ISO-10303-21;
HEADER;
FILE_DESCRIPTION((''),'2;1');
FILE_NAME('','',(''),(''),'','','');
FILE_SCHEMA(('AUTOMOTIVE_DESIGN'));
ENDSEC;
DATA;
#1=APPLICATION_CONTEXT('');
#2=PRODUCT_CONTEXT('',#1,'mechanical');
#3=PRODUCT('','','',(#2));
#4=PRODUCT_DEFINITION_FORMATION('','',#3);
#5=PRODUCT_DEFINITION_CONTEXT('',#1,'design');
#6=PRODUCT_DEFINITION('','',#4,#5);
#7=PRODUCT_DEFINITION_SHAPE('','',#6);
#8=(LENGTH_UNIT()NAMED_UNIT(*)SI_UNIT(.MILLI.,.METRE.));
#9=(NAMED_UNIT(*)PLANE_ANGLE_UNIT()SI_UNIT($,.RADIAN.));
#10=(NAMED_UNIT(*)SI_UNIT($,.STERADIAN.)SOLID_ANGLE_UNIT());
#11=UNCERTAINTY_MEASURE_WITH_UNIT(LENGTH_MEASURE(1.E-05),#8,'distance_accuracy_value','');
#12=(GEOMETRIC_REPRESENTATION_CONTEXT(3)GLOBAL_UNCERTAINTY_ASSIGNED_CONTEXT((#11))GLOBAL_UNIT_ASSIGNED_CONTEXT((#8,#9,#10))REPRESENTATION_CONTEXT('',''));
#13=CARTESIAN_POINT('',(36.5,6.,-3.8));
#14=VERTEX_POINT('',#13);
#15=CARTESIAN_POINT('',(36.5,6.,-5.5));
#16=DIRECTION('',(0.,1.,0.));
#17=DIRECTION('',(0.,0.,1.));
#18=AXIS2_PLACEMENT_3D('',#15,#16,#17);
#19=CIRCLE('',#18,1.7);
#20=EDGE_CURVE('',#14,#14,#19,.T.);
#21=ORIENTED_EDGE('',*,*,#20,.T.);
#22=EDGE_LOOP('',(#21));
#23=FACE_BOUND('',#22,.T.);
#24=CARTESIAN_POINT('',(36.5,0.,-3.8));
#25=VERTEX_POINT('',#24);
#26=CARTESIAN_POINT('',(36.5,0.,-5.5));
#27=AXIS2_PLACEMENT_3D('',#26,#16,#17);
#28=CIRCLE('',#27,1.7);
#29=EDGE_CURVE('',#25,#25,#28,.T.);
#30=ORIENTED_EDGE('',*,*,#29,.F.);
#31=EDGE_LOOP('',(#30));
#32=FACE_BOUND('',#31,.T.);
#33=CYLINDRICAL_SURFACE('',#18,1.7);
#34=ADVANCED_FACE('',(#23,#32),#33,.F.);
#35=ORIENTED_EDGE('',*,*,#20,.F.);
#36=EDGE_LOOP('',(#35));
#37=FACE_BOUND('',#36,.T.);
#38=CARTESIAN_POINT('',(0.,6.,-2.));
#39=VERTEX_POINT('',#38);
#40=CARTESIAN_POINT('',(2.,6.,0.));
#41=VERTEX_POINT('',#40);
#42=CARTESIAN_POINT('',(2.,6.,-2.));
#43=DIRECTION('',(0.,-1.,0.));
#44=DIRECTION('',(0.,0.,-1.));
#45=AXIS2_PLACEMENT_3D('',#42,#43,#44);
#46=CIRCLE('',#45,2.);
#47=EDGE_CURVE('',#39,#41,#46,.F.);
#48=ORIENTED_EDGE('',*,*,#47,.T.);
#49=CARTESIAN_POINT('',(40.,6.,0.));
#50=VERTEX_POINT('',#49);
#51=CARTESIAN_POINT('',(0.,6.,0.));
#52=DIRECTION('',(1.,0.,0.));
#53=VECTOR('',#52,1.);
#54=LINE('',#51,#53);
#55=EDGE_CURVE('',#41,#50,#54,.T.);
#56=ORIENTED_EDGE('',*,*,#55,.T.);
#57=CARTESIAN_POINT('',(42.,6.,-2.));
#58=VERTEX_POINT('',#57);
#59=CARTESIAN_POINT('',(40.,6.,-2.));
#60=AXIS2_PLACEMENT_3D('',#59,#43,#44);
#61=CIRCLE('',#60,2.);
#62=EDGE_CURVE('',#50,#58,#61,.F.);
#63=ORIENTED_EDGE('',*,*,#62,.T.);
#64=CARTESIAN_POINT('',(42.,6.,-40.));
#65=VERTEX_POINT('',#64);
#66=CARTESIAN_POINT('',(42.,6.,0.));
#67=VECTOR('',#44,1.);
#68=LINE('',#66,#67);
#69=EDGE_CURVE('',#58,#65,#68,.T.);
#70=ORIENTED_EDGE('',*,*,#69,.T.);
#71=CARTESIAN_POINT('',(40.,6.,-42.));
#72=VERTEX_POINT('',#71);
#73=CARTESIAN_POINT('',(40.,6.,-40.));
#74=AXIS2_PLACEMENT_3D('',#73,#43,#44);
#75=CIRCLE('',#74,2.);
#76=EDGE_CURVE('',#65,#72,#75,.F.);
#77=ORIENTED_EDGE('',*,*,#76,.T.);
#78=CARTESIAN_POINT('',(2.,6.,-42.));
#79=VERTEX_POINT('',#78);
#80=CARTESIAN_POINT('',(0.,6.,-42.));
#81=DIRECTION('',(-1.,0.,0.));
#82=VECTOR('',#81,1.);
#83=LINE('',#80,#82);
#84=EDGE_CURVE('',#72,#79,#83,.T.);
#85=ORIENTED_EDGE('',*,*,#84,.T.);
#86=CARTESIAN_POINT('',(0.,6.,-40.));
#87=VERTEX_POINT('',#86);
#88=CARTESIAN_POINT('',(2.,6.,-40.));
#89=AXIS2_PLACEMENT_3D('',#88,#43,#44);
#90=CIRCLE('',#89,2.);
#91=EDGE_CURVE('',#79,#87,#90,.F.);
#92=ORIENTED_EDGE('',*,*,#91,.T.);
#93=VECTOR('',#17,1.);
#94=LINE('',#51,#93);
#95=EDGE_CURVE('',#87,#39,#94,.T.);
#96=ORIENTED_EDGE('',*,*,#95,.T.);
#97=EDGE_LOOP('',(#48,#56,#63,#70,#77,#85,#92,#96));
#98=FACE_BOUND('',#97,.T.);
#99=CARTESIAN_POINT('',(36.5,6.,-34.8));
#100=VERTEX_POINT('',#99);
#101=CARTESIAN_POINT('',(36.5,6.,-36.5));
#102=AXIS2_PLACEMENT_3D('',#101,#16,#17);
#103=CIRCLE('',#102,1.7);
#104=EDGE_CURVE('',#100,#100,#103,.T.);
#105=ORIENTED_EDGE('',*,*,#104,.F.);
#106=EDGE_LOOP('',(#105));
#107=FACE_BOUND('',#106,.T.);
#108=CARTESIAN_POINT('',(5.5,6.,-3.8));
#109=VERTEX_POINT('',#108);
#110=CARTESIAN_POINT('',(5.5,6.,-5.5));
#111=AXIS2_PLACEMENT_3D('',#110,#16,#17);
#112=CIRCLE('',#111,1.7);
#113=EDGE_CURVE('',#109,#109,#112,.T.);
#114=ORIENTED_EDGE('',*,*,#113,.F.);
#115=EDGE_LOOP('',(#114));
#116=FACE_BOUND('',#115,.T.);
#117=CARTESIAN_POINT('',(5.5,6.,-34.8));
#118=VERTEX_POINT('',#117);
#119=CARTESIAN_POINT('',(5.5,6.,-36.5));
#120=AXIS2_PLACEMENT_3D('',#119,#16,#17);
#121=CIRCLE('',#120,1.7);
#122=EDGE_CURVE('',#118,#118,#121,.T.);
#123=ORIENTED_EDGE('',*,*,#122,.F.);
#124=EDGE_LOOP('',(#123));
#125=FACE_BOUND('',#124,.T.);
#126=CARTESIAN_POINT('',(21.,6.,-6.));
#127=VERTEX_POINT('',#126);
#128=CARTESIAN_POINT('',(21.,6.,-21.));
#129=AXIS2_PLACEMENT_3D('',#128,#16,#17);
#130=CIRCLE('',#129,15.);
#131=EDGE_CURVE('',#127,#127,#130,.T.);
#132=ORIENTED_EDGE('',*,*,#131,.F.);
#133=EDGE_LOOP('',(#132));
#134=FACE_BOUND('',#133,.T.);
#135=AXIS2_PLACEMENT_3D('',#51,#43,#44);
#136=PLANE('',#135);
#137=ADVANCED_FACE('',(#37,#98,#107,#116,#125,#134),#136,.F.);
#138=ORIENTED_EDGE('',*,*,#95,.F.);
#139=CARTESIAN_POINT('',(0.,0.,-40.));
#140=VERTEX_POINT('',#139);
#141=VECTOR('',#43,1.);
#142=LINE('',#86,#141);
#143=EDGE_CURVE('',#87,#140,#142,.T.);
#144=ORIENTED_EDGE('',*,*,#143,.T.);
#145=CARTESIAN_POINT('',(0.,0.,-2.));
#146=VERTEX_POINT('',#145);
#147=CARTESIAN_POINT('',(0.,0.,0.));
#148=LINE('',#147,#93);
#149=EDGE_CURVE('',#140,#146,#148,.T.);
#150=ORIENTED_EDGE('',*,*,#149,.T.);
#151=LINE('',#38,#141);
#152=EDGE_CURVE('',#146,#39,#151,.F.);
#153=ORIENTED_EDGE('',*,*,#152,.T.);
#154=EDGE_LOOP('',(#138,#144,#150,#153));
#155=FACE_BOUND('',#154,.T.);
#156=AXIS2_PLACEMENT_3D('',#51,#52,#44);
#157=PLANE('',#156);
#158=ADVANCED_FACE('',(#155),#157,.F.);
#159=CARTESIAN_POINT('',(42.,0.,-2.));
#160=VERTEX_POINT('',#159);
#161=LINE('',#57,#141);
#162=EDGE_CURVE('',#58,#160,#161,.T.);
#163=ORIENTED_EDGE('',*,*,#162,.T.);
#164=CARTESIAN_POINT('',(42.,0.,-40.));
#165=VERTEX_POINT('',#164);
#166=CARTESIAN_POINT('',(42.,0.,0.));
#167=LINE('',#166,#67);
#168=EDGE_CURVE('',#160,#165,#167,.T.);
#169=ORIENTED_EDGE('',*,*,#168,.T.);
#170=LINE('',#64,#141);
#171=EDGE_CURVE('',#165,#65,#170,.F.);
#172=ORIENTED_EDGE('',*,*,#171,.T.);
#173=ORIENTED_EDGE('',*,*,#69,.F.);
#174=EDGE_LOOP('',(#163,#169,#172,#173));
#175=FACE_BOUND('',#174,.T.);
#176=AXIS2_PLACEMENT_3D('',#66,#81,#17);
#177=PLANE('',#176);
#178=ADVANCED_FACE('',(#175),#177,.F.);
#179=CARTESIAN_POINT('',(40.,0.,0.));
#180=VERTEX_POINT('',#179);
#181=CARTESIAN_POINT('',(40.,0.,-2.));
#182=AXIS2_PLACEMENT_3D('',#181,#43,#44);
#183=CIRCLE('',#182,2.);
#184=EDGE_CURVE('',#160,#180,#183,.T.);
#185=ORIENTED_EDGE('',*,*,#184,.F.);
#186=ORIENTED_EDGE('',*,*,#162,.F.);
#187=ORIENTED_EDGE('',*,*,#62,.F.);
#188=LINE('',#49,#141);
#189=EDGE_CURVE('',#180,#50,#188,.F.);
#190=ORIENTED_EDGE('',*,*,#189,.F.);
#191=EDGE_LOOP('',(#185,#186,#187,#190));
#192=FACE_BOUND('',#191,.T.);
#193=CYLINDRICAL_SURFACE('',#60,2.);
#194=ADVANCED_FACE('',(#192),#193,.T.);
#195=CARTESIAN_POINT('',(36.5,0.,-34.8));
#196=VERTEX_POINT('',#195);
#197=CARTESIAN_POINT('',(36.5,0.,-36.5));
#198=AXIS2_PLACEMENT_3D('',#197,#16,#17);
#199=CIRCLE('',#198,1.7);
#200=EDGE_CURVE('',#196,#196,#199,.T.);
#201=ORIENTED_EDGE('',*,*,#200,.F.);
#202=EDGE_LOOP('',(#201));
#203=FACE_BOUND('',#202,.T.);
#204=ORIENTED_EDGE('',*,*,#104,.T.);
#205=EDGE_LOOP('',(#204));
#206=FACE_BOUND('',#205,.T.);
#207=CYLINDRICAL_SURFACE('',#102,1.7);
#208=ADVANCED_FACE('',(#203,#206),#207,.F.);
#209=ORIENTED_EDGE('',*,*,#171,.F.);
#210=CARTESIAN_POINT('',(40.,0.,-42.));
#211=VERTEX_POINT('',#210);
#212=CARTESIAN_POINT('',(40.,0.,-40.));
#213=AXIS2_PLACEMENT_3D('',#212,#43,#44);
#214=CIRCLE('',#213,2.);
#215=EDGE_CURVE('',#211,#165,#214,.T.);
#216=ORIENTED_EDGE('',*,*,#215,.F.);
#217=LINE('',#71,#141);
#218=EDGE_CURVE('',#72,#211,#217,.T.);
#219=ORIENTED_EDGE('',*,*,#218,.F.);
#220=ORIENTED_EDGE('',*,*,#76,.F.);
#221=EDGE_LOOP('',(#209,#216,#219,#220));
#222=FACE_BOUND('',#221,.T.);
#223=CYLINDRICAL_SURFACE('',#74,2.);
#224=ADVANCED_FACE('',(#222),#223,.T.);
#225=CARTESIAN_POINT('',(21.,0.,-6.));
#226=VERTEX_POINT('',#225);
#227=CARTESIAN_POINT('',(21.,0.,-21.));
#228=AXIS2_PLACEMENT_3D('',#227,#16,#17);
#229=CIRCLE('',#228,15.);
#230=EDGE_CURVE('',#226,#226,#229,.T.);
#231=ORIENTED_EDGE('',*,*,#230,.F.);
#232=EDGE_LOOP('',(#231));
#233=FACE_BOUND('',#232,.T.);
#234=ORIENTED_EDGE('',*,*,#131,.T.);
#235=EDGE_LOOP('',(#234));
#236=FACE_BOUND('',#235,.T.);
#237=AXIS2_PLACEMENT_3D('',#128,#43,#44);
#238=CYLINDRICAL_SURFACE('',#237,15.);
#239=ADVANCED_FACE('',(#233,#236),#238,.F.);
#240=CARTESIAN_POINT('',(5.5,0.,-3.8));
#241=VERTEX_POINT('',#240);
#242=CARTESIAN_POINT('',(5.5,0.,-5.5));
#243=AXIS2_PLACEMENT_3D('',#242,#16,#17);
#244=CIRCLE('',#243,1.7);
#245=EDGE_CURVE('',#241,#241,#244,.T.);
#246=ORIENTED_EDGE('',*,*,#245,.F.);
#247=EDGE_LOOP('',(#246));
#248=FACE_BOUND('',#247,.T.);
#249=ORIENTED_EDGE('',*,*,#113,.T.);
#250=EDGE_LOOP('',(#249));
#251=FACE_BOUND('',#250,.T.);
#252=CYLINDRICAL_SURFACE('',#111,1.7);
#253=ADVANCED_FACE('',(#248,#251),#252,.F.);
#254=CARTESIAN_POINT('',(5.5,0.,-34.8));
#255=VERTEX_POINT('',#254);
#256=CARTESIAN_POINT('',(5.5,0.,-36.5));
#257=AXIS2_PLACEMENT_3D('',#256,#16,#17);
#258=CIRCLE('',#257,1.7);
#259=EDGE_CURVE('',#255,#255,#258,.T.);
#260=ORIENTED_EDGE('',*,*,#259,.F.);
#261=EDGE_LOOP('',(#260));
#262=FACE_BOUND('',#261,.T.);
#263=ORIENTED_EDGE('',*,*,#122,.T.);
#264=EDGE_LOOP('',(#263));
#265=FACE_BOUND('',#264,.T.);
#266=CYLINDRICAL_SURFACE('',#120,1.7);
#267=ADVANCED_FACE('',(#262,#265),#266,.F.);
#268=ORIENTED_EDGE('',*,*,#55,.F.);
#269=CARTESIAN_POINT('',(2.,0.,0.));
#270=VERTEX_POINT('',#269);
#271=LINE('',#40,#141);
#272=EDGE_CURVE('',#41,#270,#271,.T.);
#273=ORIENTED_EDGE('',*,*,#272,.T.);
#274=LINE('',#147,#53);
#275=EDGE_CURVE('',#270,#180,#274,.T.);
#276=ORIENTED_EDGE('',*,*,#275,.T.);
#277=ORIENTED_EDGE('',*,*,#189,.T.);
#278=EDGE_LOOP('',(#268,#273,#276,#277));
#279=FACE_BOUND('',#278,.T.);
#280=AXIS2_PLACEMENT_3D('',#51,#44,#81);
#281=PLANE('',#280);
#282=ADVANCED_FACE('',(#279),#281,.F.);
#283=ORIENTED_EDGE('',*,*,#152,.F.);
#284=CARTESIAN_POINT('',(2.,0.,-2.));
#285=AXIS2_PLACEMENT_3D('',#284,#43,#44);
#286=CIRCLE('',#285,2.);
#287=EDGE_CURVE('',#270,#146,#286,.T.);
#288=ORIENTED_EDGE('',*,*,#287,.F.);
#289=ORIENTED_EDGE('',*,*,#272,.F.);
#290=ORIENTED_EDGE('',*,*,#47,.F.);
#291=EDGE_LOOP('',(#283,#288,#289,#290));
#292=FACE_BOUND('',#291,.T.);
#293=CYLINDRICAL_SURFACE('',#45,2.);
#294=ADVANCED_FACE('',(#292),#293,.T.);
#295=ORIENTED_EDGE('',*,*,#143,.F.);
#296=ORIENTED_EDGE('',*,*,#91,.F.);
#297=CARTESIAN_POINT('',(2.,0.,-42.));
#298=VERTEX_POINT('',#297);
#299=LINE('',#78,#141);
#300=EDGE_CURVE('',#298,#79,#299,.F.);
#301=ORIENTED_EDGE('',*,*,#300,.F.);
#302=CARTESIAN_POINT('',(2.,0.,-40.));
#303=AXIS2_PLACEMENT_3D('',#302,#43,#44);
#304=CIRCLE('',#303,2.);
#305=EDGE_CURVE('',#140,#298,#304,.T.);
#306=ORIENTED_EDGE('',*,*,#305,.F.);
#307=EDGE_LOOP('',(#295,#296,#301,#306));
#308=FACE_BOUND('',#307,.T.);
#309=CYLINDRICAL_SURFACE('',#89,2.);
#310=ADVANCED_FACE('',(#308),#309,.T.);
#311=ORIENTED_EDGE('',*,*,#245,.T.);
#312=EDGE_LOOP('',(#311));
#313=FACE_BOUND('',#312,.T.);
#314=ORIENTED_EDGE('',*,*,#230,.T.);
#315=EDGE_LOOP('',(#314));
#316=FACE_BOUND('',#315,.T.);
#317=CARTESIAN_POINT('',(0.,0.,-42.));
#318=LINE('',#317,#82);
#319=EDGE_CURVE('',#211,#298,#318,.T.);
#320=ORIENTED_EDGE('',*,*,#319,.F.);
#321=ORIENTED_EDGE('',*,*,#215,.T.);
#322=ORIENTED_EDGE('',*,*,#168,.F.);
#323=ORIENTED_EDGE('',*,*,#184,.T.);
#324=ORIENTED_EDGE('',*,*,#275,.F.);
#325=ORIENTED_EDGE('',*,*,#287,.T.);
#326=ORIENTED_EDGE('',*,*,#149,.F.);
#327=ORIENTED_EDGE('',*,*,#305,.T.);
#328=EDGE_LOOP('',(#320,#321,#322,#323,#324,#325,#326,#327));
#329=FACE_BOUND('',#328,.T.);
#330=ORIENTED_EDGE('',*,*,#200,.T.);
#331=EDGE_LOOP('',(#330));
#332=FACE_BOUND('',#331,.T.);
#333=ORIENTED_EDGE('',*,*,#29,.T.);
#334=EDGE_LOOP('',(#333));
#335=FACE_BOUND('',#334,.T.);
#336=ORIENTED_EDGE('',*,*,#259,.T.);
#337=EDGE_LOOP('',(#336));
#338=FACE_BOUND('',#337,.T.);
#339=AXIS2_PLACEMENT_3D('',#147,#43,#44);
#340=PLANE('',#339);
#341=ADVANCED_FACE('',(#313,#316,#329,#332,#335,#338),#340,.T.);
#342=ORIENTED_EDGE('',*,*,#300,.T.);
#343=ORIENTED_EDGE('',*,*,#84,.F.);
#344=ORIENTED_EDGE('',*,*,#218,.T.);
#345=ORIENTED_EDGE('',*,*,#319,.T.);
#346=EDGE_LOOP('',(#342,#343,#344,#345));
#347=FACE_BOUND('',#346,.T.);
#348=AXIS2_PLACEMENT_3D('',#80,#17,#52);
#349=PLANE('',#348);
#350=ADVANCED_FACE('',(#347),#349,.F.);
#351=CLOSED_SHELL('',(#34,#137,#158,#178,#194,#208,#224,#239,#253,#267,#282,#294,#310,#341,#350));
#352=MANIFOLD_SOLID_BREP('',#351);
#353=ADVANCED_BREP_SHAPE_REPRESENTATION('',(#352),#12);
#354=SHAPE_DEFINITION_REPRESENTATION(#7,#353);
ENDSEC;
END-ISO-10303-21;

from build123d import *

# Parameters (mm, degrees)
SKETCH_1_W                 = 42
SKETCH_1_H                 = 42
SKETCH_1_R                 = 15
EXTRUDE_1_DEPTH            = 6
FILLET_1_R                 = 2
HOLE_WIZARD_M3_1_OUTLINE_R = 1.7
HOLE_WIZARD_M3_1_DEPTH     = 6


# Read off the part's stored shape, not the designer's step: M3 间隙孔1
with BuildPart() as part:
    # 草图1 → 凸台-拉伸1 (new body)
    with BuildSketch(Plane(origin=(0, 0, 0), x_dir=(1, 0, 0), z_dir=(0, 1, 0))):
        with Locations((21, 21)):
            Rectangle(SKETCH_1_W, SKETCH_1_H)
        with Locations(Location((21, 21, 0), (0, 0, 270))):
            Circle(SKETCH_1_R, mode=Mode.SUBTRACT)
    extrude(amount=EXTRUDE_1_DEPTH)

    # 圆角1
    fillet_1_edges = [part.edges().sort_by_distance(p)[0] for p in [
        (0, 3, -42),
        (42, 3, -42),
        (42, 3, 0),
        (0, 3, 0),
    ]]
    fillet(fillet_1_edges, radius=FILLET_1_R)

    # M3 间隙孔1 outline → M3 间隙孔1 (cut)
    with BuildSketch(Plane(origin=(0, 0, 0), x_dir=(1, 0, 0), z_dir=(0, 1, 0))):
        with Locations((36.5, 36.5)):
            Circle(HOLE_WIZARD_M3_1_OUTLINE_R)
        with Locations((5.5, 5.5)):
            Circle(HOLE_WIZARD_M3_1_OUTLINE_R)
        with Locations((36.5, 5.5)):
            Circle(HOLE_WIZARD_M3_1_OUTLINE_R)
        with Locations((5.5, 36.5)):
            Circle(HOLE_WIZARD_M3_1_OUTLINE_R)
    extrude(amount=HOLE_WIZARD_M3_1_DEPTH, mode=Mode.SUBTRACT)


solid = part.part
